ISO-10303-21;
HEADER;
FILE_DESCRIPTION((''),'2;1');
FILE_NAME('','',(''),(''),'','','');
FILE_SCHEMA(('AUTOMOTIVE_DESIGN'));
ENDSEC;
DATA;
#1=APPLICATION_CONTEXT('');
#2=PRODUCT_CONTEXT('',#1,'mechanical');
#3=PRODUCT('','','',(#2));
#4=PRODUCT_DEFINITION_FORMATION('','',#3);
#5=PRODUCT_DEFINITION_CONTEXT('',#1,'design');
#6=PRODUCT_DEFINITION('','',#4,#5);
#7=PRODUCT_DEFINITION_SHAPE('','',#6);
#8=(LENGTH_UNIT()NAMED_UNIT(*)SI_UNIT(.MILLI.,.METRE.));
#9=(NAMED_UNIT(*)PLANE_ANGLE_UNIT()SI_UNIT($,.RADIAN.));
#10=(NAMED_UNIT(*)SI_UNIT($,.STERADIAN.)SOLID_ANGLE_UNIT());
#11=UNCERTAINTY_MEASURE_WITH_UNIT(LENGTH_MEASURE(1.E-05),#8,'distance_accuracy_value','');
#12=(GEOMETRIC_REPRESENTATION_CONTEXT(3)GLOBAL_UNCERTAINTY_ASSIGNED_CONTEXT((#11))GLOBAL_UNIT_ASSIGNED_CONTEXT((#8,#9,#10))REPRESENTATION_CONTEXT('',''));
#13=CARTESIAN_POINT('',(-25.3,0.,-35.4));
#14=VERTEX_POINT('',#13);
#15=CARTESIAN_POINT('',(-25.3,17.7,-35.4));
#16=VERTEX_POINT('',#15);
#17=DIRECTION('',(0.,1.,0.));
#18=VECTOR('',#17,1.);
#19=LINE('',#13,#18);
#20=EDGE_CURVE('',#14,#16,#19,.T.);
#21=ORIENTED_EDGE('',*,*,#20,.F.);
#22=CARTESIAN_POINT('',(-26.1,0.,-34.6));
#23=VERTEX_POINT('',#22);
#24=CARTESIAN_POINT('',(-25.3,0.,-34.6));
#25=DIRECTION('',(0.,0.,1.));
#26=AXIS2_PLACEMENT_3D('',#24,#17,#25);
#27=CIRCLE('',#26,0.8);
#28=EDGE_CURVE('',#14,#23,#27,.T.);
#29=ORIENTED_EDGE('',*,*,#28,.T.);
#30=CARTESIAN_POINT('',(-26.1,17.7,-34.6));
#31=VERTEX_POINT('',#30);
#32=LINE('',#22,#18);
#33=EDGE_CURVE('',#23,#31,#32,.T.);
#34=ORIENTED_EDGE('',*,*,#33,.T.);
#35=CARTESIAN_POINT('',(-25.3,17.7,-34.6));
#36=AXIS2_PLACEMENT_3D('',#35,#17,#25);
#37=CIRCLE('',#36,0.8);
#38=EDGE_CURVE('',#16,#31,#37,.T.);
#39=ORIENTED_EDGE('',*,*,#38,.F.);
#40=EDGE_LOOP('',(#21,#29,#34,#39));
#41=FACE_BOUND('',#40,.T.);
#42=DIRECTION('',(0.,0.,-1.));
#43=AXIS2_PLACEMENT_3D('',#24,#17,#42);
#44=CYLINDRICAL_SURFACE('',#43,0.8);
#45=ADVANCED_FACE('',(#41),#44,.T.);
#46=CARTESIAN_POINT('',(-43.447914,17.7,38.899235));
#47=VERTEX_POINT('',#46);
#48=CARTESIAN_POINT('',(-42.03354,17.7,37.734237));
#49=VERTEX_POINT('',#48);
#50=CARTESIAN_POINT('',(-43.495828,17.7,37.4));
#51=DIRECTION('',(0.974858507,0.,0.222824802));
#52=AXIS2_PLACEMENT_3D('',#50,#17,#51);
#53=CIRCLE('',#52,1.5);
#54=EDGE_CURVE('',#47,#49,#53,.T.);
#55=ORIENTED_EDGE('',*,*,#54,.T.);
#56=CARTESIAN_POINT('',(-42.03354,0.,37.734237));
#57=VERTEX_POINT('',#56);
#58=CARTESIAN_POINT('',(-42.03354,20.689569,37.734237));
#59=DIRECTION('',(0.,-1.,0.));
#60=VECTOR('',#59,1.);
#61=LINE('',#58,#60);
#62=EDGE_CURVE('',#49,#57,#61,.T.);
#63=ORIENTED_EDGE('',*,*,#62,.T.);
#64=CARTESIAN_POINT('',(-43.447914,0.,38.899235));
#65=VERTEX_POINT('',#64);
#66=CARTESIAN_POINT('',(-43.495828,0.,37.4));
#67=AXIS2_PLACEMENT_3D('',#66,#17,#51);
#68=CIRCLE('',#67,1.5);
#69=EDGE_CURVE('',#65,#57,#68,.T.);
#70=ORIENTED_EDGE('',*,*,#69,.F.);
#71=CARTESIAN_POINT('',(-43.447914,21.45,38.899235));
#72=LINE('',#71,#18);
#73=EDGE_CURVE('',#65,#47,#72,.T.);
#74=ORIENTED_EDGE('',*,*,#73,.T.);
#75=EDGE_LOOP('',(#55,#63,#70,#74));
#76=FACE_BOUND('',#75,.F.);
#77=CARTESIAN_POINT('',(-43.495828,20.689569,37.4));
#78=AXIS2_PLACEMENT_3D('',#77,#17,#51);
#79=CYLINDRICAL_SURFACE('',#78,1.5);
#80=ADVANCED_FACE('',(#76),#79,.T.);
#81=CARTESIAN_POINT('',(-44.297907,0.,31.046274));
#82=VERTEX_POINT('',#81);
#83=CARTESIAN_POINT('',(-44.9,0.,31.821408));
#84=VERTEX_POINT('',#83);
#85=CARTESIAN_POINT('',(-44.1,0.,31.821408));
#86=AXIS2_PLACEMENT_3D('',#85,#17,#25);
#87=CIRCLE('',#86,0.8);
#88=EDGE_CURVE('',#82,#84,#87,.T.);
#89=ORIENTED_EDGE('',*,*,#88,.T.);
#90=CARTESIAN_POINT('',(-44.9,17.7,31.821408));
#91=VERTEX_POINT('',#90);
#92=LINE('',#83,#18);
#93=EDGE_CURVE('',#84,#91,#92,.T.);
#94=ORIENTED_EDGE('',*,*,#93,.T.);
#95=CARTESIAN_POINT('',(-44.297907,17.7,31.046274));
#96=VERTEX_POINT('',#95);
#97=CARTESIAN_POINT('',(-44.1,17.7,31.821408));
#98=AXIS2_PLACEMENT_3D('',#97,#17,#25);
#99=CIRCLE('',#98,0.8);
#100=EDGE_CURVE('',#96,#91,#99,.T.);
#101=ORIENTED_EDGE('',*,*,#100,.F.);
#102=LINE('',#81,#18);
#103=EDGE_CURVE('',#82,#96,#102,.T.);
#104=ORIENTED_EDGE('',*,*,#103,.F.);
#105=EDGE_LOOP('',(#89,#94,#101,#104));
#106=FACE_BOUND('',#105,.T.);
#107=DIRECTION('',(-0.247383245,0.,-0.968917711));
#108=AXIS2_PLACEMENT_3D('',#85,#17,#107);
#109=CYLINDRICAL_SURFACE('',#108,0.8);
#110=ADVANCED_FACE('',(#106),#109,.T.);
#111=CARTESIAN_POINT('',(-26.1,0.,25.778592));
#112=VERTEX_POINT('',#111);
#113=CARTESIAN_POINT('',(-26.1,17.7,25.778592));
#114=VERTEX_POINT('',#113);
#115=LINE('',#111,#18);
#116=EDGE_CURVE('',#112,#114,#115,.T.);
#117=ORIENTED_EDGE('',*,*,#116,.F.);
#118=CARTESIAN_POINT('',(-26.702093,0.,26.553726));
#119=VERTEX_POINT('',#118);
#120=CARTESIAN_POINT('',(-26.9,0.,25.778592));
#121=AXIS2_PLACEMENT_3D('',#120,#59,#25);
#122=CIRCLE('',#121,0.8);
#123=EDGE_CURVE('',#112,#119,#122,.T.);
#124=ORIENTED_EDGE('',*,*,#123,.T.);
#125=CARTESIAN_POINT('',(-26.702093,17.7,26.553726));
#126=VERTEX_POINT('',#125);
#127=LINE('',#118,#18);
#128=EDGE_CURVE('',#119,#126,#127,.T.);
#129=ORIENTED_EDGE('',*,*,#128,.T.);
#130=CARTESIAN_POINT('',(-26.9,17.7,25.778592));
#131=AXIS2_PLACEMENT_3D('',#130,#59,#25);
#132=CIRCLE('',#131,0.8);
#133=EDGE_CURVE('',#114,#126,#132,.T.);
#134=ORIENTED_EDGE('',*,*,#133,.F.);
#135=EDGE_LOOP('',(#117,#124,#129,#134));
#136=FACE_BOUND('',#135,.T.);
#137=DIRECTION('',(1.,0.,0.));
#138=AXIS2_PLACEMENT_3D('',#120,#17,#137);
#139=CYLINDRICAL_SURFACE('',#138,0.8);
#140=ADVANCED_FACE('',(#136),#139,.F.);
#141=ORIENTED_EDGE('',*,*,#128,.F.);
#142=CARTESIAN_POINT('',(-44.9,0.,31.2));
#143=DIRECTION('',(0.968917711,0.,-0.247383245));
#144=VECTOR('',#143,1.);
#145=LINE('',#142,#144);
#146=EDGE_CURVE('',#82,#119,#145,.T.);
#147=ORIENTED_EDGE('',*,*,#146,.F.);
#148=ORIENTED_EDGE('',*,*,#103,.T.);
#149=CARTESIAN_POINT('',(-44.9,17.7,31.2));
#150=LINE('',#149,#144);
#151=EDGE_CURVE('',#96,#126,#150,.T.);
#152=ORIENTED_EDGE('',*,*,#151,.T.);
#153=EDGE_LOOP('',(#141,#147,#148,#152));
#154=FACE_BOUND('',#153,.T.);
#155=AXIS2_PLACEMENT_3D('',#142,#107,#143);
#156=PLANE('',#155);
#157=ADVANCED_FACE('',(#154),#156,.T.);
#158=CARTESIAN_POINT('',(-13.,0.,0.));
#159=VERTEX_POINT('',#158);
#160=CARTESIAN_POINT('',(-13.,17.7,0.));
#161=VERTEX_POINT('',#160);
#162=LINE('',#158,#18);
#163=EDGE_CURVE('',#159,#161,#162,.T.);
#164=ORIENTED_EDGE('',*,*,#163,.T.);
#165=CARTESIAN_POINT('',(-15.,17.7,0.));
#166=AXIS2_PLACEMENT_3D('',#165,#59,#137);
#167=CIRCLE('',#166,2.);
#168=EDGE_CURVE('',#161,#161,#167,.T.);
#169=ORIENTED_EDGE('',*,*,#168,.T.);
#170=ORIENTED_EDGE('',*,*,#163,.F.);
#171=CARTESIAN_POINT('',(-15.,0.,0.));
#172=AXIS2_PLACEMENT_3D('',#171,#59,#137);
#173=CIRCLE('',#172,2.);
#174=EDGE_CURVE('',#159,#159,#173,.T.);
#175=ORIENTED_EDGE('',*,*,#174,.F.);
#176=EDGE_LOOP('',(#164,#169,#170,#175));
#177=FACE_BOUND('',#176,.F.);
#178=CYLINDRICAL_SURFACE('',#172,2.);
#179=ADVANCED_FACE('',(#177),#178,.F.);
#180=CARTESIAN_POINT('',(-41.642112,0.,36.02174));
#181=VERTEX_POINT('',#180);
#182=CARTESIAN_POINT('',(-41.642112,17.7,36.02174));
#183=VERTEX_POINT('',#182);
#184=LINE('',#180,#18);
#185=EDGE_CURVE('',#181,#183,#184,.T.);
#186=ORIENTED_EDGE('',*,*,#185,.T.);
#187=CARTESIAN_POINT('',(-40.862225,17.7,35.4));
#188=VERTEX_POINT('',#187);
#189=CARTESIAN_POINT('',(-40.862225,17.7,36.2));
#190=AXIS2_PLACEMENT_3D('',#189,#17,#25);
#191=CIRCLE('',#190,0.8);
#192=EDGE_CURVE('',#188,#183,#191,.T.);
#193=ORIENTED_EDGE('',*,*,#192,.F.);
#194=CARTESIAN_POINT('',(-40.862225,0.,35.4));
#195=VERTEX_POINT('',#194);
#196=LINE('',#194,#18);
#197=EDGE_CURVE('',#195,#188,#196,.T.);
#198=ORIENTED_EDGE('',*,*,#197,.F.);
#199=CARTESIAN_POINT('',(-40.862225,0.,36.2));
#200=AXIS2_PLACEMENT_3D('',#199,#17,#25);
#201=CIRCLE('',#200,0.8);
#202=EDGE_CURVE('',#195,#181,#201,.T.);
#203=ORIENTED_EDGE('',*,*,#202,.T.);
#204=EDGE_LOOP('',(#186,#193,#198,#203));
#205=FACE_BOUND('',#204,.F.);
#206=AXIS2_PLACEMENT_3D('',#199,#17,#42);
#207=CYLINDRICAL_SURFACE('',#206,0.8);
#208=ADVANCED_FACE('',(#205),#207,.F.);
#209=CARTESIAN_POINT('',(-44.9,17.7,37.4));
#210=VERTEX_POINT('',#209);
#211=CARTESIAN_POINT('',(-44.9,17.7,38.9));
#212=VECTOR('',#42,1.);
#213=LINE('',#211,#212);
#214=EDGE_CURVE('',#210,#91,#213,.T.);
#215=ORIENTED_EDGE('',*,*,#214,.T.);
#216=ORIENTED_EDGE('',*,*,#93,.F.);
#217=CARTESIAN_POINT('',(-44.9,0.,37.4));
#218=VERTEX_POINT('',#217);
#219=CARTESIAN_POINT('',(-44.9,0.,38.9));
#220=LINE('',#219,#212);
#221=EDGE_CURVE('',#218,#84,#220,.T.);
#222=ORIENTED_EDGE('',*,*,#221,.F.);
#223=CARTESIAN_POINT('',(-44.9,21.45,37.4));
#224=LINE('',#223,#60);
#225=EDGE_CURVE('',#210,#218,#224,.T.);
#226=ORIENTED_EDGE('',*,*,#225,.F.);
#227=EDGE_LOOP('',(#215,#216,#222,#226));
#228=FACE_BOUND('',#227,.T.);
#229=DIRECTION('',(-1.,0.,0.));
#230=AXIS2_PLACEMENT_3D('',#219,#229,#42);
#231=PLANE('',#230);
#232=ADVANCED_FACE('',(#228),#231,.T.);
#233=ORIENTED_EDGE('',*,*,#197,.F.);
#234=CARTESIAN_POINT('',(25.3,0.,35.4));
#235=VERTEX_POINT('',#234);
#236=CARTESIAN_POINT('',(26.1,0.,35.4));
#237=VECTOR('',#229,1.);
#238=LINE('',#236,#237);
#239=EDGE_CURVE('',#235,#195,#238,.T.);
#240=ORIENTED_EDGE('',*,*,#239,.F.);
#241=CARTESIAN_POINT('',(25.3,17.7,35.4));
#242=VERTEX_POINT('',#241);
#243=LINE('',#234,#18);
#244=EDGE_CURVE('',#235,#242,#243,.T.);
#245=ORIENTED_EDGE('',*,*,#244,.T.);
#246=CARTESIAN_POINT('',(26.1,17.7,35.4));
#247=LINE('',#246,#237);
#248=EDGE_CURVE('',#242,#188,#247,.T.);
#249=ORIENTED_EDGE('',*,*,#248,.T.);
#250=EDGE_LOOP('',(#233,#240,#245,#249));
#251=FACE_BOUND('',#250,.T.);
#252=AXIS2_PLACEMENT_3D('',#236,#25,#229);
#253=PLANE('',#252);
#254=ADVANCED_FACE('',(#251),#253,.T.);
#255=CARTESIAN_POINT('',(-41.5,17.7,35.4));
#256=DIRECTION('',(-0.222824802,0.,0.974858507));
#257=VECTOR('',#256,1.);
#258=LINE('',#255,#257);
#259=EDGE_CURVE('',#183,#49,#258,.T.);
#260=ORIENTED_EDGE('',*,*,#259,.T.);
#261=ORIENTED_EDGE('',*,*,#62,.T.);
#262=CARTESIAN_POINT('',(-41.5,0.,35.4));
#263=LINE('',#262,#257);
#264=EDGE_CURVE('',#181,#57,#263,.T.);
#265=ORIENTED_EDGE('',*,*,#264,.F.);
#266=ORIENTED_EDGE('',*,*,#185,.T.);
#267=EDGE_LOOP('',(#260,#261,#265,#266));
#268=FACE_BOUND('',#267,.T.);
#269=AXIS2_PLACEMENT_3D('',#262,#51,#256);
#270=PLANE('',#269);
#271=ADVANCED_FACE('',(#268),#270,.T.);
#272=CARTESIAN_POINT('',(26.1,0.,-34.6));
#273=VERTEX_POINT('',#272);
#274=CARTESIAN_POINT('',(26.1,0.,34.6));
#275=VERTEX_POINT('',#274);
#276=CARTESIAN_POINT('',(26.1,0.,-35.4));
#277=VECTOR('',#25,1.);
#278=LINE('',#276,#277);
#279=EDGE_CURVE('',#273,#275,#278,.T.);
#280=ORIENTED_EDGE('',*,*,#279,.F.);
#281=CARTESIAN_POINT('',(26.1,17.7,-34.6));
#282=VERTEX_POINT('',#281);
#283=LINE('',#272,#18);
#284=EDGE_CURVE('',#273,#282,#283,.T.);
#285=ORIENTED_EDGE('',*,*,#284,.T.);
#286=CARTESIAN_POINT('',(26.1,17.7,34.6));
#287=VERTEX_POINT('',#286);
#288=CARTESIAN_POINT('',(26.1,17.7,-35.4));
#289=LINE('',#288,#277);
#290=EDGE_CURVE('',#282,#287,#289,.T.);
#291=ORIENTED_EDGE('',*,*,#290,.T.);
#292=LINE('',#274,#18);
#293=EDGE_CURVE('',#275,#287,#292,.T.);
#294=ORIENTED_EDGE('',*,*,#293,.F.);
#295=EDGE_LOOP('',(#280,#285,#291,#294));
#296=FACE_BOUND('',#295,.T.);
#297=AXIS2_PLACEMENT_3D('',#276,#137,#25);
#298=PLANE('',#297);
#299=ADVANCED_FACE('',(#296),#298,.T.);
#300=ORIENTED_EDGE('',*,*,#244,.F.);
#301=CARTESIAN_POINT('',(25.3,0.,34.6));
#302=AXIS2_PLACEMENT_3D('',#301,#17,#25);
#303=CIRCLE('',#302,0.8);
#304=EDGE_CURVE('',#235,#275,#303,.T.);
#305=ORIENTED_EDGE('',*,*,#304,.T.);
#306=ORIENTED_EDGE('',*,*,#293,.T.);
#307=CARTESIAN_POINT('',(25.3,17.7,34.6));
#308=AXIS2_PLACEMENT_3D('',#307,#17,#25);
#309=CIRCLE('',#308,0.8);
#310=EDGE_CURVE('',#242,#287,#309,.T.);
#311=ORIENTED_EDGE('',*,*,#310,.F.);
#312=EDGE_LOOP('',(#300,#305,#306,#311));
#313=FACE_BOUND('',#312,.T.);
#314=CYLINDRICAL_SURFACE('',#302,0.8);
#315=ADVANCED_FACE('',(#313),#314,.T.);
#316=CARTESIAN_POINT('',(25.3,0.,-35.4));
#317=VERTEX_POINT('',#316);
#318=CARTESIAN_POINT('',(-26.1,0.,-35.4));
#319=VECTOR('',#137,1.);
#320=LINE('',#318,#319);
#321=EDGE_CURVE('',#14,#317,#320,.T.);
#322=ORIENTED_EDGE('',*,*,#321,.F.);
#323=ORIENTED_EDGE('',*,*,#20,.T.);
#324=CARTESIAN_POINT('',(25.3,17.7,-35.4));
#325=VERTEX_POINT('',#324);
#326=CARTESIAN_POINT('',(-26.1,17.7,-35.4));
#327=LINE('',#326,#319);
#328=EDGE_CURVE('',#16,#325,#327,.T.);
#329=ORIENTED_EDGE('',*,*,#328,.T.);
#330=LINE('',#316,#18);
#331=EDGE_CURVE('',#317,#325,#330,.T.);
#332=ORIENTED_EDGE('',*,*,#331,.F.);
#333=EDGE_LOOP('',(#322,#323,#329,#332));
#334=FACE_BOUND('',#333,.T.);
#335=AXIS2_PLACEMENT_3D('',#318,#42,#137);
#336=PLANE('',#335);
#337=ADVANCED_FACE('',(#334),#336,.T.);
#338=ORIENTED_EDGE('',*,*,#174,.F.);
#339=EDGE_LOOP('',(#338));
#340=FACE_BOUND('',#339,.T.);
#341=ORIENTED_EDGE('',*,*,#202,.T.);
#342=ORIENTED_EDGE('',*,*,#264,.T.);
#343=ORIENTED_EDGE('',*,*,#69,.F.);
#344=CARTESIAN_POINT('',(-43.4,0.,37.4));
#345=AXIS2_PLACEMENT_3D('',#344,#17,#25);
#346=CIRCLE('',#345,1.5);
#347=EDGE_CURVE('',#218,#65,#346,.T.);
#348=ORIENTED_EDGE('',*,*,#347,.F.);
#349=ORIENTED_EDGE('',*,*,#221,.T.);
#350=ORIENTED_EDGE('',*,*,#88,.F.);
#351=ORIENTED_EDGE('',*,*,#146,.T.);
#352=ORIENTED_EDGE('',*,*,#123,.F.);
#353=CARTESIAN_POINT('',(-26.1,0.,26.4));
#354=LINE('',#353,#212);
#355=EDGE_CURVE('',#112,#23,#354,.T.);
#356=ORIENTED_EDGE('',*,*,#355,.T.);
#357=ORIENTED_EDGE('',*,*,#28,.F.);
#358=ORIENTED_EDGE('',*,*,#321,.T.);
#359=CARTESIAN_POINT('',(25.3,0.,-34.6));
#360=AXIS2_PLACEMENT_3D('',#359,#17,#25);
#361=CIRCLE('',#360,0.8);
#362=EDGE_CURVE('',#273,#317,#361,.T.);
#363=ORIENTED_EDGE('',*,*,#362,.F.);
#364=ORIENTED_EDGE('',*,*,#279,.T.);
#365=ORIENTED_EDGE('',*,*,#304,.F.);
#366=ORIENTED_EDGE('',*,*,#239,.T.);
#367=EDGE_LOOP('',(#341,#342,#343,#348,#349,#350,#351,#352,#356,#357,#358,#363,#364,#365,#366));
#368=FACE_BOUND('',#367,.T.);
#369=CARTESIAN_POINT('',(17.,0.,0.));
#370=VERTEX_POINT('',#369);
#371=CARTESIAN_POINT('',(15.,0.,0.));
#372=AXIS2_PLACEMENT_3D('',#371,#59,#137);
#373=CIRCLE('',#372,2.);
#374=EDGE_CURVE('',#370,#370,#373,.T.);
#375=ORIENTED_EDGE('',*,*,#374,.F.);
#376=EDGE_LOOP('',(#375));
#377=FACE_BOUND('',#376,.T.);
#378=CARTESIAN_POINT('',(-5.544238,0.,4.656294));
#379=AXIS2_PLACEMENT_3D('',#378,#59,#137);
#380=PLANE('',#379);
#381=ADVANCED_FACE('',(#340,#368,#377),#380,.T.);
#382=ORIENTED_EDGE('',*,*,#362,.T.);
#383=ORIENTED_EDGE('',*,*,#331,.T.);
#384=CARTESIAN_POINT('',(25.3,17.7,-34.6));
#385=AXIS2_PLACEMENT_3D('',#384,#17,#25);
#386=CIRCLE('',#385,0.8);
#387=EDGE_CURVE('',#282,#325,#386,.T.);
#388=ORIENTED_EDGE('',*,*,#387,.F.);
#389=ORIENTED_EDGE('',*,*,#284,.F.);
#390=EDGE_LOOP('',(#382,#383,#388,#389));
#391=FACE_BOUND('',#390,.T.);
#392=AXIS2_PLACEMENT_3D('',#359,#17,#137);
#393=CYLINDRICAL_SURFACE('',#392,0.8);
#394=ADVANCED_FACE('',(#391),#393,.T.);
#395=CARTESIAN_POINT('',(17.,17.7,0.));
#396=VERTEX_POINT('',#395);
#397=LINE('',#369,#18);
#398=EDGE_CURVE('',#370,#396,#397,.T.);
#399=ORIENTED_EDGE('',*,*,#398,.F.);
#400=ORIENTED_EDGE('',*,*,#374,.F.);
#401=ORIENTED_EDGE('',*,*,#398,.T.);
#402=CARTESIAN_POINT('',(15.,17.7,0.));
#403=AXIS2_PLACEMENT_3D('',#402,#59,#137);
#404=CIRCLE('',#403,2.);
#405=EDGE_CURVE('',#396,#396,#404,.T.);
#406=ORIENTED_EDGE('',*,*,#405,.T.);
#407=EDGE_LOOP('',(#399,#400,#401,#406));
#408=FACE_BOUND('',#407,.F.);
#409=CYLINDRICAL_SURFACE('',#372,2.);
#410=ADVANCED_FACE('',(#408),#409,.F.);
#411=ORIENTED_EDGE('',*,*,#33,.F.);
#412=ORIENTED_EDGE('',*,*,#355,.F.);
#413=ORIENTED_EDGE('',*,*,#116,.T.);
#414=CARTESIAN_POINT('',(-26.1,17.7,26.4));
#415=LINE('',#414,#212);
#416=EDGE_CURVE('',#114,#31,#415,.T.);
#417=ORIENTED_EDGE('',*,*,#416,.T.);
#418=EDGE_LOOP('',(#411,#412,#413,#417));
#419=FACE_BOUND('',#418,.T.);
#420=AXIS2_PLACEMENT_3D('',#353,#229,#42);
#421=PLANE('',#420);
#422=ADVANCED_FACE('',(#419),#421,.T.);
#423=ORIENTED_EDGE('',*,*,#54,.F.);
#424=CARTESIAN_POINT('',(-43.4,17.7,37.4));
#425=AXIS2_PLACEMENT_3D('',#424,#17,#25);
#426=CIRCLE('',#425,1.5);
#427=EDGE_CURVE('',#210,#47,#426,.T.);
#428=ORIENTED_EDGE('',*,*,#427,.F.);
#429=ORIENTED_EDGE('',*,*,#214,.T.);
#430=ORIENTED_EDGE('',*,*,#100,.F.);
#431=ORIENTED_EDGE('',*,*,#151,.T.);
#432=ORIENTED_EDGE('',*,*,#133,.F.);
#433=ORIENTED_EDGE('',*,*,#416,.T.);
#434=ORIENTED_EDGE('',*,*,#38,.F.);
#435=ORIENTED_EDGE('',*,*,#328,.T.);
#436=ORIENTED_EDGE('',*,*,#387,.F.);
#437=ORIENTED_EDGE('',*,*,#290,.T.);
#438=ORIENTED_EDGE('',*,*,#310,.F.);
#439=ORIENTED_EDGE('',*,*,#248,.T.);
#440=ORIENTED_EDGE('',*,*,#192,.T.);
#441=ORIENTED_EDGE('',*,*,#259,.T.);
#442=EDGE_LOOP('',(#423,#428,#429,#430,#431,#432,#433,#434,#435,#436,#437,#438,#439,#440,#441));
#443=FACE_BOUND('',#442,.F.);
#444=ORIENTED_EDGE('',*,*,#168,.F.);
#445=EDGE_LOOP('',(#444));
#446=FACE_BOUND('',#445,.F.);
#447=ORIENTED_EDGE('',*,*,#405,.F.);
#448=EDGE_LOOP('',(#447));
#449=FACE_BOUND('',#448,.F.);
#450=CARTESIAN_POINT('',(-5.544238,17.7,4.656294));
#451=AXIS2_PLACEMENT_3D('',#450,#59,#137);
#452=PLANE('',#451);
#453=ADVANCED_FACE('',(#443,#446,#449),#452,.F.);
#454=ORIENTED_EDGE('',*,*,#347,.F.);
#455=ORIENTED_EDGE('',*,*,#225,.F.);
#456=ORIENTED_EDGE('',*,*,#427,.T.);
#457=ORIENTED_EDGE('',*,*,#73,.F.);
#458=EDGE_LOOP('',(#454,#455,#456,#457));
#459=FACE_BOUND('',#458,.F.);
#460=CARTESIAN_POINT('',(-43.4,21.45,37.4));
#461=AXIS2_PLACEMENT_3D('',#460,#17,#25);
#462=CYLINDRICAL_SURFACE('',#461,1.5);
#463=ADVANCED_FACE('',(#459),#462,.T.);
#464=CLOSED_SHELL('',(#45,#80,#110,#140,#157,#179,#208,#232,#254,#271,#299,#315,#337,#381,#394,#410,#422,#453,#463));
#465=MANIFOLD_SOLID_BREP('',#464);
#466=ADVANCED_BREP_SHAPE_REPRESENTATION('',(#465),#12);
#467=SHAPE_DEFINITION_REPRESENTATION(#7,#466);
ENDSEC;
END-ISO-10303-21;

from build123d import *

# Parameters (mm, degrees)
F0_R        = 2
F1_DEPTH    = 17.7
F2_T1_DEPTH = 25.2
F2_T3_DEPTH = 23.679138459
F3_R        = 0.8


# Not quite as in the source:
# - a fillet or chamfer that OpenCascade refuses, or shapes differently, is made with other operations: its cross-section is extruded or revolved along the edge and cut away or added


with BuildPart() as f1:
    # F0 (on Front) → F1 (new body)
    with BuildSketch(Plane.XZ):
        Polygon((26.1, 35.4), (-41.5, 35.4), (-42.3, 38.9), (-44.9, 38.9), (-44.9, 31.2), (-26.1, 26.4), (-26.1, -35.4), (26.1, -35.4), align=None)
        with Locations((-15, 0)):
            Circle(F0_R, mode=Mode.SUBTRACT)
        with Locations((15, 0)):
            Circle(F0_R, mode=Mode.SUBTRACT)
    extrude(amount=-F1_DEPTH)

    # F2: fillet of radius 1.5 on 2 edges, made by hand

    # F2_s2 → F2_t1 (cut)
    with BuildSketch(Plane.XZ.offset(-21.45)):
        with BuildLine():
            ThreePointArc((-43.4, 38.9), (-44.4606601718, 38.4606601718), (-44.9, 37.4))
            Line((-44.9, 37.4), (-44.9, 38.9))
            Line((-44.9, 38.9), (-43.4, 38.9))
        make_face()
    extrude(amount=F2_T1_DEPTH, mode=Mode.SUBTRACT)

    # F2_s4 → F2_t3 (cut)
    with BuildSketch(Plane.XZ.offset(-20.6895692295)):
        with BuildLine():
            ThreePointArc((-42.0335399319, 37.7342372023), (-42.560775769, 38.5728929626), (-43.4958276918, 38.9))
            Line((-43.4958276918, 38.9), (-42.3, 38.9))
            Line((-42.3, 38.9), (-42.0335399319, 37.7342372023))
        make_face()
    extrude(amount=F2_T3_DEPTH, mode=Mode.SUBTRACT)

    # F3
    f3_edges = [f1.edges().sort_by_distance(p)[0] for p in [
        (-41.5, 8.85, 35.4),
        (26.1, 8.85, 35.4),
        (26.1, 8.85, -35.4),
        (-44.9, 8.85, 31.2),
        (-26.1, 8.85, 26.4),
        (-26.1, 8.85, -35.4),
    ]]
    fillet(f3_edges, radius=F3_R)


solid = f1.part
